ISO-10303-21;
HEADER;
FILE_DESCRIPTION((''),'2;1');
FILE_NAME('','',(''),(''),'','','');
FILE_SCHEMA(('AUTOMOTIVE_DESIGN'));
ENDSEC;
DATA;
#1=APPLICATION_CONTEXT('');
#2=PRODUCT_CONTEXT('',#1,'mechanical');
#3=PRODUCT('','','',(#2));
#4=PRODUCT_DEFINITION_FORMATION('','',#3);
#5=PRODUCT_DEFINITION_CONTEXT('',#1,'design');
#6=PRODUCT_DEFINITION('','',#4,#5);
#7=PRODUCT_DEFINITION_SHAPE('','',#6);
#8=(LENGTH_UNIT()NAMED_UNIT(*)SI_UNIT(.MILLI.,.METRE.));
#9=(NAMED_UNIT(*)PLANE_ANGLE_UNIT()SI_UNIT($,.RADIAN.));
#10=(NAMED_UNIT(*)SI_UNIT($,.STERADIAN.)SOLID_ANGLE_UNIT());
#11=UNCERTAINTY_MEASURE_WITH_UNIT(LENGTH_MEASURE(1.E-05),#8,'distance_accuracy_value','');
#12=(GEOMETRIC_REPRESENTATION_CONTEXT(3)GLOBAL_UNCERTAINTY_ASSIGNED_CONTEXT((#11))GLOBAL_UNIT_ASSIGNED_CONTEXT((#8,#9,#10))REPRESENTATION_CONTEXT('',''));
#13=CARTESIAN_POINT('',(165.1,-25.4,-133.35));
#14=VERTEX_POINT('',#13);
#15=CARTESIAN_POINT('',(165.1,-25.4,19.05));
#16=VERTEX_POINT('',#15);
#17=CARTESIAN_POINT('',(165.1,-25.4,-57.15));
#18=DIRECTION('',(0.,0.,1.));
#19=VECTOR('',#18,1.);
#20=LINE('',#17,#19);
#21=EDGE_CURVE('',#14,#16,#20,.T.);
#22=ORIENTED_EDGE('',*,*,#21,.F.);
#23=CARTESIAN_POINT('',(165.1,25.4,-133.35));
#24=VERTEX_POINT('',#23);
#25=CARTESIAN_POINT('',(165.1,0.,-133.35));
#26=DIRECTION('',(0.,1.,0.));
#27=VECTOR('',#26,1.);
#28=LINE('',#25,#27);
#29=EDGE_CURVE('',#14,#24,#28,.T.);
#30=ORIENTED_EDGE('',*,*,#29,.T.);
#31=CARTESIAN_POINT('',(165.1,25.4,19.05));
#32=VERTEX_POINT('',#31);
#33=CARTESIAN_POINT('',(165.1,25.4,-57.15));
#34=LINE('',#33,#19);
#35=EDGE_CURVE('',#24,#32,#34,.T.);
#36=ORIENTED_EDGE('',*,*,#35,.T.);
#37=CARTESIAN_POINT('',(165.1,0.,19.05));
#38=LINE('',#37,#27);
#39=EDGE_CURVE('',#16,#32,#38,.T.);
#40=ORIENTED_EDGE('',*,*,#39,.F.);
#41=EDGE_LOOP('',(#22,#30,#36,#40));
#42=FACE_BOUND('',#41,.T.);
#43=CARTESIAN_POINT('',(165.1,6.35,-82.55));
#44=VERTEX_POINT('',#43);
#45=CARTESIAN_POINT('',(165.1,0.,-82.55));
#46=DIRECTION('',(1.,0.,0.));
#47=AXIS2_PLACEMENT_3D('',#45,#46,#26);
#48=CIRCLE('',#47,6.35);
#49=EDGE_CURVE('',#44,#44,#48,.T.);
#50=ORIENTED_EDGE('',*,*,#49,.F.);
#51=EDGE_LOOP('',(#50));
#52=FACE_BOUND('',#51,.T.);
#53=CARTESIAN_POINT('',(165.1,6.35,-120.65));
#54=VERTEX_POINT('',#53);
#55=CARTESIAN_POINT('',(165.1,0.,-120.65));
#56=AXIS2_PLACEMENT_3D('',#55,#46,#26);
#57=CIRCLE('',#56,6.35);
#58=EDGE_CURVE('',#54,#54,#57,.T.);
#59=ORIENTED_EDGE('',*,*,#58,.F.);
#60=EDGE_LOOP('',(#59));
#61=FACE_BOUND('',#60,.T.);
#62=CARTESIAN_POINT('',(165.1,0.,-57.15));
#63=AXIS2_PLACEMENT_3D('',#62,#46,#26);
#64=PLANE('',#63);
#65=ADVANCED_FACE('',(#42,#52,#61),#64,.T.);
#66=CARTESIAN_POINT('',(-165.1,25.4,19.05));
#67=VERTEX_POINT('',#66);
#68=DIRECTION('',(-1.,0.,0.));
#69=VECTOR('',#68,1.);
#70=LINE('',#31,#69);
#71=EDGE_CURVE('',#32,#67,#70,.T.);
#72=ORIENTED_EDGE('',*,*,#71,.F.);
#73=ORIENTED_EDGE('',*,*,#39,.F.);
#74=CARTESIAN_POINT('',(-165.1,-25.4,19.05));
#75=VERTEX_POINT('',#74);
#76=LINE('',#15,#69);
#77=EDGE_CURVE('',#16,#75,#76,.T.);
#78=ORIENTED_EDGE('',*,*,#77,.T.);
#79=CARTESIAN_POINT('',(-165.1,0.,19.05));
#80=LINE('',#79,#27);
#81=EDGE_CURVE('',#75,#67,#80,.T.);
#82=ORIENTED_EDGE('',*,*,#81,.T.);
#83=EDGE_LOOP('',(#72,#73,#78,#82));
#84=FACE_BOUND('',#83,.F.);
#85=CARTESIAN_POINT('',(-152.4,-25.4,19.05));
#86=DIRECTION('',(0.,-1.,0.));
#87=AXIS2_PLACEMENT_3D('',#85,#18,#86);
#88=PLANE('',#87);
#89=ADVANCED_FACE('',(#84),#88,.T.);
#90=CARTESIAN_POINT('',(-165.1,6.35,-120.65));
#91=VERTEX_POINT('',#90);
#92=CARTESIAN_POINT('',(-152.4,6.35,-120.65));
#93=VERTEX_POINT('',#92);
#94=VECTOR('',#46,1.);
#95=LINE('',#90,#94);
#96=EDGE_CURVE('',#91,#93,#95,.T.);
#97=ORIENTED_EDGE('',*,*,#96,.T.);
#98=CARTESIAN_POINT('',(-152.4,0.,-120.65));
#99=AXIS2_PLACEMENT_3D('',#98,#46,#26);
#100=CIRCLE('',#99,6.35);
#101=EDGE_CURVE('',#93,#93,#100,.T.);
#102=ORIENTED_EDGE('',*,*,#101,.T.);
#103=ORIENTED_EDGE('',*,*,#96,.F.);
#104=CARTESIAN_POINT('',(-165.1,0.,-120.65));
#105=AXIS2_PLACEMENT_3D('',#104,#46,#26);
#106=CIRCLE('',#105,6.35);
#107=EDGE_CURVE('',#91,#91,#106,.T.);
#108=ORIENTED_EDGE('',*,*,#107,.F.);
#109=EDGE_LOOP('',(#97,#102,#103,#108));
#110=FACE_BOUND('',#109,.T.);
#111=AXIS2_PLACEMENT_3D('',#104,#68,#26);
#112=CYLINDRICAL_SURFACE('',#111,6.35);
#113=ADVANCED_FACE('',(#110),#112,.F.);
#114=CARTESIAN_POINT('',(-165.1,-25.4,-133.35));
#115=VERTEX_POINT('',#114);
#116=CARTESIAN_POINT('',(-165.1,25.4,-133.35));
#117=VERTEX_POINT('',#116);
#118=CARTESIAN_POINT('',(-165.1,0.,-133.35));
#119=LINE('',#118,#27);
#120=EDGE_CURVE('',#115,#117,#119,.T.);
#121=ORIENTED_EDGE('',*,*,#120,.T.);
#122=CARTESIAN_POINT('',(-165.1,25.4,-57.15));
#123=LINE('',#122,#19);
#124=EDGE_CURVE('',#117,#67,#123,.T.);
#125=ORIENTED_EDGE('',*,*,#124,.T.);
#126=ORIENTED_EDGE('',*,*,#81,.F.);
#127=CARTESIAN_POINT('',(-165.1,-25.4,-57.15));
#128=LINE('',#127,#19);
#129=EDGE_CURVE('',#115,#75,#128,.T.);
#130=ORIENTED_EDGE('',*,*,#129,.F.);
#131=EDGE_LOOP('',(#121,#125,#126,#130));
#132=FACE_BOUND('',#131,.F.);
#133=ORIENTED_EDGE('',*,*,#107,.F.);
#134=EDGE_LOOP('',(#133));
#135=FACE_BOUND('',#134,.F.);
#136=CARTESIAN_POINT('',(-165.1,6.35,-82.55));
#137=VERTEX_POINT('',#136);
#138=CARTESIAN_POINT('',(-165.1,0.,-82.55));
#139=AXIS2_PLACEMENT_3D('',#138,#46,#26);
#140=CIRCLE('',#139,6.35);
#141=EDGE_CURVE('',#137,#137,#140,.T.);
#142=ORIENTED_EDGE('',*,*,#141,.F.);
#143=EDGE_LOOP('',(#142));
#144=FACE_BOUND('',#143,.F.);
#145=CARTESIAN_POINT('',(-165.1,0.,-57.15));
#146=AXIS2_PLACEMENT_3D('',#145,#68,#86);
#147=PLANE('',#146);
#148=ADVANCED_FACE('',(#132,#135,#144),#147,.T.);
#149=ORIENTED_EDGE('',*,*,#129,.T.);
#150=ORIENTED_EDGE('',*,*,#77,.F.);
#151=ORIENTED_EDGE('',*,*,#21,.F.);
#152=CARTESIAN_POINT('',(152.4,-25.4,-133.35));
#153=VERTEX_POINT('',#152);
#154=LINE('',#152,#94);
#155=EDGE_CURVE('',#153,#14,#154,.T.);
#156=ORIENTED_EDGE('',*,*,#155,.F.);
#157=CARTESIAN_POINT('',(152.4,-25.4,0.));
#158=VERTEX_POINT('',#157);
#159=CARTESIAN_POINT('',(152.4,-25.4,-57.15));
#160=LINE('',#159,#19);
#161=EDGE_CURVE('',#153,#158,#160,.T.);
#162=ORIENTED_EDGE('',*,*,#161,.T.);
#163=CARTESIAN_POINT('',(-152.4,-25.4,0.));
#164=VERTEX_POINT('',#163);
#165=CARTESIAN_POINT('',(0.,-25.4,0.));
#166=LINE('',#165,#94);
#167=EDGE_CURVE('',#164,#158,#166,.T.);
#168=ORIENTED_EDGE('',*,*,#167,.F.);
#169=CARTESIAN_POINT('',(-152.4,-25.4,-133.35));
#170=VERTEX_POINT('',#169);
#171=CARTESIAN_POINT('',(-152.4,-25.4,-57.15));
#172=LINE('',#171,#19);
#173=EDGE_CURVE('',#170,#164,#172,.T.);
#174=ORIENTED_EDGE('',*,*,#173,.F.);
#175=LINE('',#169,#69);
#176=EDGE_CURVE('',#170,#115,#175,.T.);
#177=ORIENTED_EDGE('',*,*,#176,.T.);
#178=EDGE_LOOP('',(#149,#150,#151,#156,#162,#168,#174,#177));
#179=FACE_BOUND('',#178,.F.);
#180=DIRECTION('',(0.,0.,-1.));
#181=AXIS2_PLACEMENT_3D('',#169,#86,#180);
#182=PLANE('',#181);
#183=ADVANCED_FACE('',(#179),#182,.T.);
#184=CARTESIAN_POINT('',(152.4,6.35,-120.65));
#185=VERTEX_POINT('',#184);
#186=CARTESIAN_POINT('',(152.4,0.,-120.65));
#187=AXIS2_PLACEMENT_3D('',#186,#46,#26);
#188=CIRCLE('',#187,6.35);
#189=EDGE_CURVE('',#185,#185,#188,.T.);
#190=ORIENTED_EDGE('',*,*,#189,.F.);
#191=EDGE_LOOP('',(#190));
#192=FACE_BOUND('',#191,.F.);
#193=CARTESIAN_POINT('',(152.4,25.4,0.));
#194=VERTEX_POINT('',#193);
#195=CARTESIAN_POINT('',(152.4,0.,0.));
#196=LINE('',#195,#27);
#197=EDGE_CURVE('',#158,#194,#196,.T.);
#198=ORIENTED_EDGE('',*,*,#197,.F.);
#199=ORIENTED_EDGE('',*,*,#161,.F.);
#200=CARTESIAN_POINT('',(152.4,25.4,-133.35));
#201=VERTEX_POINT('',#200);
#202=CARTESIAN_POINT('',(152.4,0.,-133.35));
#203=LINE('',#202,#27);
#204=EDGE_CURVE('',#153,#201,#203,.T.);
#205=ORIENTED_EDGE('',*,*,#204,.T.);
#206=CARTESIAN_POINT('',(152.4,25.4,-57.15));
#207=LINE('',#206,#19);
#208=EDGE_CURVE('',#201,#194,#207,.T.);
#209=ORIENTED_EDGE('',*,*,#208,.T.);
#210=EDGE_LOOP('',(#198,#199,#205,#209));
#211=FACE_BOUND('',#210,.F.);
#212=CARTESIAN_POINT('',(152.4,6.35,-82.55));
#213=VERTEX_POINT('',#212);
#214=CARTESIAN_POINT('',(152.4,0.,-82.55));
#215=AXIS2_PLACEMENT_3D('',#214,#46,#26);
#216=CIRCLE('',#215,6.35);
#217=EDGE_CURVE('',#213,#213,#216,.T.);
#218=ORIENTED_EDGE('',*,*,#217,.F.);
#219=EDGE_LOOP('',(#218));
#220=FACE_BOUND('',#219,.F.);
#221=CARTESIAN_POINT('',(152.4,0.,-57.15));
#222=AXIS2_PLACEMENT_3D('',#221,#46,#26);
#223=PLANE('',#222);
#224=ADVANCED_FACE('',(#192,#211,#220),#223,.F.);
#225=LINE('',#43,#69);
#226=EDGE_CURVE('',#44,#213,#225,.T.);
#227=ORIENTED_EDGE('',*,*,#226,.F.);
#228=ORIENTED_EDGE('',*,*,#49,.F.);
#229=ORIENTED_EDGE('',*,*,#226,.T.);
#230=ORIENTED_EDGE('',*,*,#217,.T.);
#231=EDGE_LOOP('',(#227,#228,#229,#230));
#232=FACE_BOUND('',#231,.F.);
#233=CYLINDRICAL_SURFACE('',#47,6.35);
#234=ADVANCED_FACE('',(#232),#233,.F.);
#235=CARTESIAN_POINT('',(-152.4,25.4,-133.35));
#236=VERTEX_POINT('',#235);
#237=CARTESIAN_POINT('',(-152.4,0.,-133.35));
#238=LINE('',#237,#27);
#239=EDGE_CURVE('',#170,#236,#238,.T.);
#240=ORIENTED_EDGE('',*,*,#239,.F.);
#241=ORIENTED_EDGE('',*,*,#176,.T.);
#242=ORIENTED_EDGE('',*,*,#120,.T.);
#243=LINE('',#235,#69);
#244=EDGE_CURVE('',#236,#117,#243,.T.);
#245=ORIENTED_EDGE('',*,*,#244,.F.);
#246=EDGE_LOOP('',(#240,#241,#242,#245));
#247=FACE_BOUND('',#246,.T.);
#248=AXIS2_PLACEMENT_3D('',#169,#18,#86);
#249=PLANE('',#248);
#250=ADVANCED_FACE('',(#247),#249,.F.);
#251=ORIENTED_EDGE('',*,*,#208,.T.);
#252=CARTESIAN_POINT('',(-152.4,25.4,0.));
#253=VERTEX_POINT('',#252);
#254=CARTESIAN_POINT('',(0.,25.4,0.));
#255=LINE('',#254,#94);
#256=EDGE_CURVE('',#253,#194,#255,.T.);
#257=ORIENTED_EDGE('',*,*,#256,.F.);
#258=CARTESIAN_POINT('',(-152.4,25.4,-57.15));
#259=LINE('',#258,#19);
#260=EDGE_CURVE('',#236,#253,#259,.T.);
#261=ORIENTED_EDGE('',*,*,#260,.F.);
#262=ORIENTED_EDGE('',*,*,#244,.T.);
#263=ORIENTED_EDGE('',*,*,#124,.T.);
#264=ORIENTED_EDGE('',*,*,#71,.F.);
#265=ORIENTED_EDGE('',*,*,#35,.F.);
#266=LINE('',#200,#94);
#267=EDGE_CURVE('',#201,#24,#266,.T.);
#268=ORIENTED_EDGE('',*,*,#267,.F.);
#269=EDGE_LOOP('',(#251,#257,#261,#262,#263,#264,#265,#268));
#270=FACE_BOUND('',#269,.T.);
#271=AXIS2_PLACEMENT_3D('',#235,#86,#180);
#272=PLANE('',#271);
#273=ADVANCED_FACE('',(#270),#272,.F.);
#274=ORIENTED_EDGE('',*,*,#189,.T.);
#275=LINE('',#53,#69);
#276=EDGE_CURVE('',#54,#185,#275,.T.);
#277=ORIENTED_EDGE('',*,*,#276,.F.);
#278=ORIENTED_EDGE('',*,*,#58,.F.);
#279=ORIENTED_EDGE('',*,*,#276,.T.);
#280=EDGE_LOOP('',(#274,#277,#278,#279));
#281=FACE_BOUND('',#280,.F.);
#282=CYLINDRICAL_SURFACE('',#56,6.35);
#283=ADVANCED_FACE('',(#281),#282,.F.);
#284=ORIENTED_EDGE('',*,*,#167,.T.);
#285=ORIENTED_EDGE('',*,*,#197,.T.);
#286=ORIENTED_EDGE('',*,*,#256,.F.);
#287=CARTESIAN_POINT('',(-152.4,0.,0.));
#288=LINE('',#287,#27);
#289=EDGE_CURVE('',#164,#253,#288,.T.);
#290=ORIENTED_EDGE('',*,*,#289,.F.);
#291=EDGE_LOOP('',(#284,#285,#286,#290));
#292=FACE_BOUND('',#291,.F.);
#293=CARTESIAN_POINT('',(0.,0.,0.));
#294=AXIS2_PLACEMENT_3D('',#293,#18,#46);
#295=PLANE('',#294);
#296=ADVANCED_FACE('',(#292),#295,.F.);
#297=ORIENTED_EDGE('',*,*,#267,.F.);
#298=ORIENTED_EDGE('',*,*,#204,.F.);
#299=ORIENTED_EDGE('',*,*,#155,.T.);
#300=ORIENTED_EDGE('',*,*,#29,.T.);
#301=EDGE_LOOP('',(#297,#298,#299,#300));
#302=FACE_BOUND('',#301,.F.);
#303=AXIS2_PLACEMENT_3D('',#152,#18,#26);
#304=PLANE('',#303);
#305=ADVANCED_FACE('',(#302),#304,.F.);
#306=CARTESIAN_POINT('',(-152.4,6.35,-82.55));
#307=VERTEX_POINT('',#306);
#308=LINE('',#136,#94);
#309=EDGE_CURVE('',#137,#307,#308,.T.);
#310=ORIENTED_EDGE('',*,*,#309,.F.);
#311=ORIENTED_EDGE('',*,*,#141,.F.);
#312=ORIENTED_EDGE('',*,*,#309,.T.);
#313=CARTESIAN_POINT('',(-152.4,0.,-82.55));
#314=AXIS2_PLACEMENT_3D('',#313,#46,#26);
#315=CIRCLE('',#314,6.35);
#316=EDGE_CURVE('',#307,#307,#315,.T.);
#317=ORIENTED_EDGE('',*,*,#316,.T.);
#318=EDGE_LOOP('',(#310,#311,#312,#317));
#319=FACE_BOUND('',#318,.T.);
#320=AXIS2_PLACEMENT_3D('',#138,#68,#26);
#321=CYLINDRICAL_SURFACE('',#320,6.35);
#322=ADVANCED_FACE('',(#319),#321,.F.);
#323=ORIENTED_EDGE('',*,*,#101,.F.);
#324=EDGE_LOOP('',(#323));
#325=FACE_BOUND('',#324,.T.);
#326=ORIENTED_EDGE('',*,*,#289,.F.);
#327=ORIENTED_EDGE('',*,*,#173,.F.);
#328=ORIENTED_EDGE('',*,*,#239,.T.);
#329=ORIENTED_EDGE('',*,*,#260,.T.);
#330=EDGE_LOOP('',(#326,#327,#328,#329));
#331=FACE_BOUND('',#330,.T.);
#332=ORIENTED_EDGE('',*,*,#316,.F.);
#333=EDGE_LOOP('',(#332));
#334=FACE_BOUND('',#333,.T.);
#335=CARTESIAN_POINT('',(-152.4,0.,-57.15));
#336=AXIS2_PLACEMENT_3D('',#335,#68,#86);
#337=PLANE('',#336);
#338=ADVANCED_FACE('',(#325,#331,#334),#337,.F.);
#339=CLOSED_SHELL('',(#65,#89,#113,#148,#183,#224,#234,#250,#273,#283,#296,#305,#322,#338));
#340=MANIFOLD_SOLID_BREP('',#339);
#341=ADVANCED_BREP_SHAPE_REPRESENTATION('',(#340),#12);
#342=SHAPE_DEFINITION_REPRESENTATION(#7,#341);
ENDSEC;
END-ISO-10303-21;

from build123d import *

# Parameters (mm, degrees)
F0_W     = 304.8
F0_H     = 50.8
F1_DEPTH = 19.05
F2_W     = 50.8
F2_H     = 152.4
F3_DEPTH = 12.7
F4_R     = 6.35
F5_DEPTH = 12.7


# Not quite as in the source:
# - a pattern or mirror of a feature is missing from the dataset's text; its kind, count and spacing are read off the source's solid


with BuildPart() as f1:
    # F0 (on Top) → F1 (new body)
    with BuildSketch(Plane.XY):
        Rectangle(F0_W, F0_H)
    extrude(amount=F1_DEPTH)

    # F2 (on face) → F3 (join)
    with BuildSketch(Plane.YZ.offset(152.4)):
        with Locations((0, -57.15)):
            Rectangle(F2_W, F2_H)
    f3 = extrude(amount=F3_DEPTH)

    # F3_copies: F3 across plane
    add(f3.mirror(Plane(origin=(0, 0, 0), x_dir=(0, 0, -1), z_dir=(-1, 0, 0))))

    # F4 (on face) → F5 (cut, through all)
    with BuildSketch(Plane.YZ.offset(165.1)):
        with Locations((0, -120.65)):
            Circle(F4_R)
        with Locations((0, -82.55)):
            Circle(F4_R)
    f5 = extrude(amount=-F5_DEPTH, mode=Mode.SUBTRACT)

    # F5_copies: F5 across plane
    add(f5.mirror(Plane(origin=(0, 0, 0), x_dir=(0, 0, -1), z_dir=(-1, 0, 0))), mode=Mode.SUBTRACT)


solid = f1.part
